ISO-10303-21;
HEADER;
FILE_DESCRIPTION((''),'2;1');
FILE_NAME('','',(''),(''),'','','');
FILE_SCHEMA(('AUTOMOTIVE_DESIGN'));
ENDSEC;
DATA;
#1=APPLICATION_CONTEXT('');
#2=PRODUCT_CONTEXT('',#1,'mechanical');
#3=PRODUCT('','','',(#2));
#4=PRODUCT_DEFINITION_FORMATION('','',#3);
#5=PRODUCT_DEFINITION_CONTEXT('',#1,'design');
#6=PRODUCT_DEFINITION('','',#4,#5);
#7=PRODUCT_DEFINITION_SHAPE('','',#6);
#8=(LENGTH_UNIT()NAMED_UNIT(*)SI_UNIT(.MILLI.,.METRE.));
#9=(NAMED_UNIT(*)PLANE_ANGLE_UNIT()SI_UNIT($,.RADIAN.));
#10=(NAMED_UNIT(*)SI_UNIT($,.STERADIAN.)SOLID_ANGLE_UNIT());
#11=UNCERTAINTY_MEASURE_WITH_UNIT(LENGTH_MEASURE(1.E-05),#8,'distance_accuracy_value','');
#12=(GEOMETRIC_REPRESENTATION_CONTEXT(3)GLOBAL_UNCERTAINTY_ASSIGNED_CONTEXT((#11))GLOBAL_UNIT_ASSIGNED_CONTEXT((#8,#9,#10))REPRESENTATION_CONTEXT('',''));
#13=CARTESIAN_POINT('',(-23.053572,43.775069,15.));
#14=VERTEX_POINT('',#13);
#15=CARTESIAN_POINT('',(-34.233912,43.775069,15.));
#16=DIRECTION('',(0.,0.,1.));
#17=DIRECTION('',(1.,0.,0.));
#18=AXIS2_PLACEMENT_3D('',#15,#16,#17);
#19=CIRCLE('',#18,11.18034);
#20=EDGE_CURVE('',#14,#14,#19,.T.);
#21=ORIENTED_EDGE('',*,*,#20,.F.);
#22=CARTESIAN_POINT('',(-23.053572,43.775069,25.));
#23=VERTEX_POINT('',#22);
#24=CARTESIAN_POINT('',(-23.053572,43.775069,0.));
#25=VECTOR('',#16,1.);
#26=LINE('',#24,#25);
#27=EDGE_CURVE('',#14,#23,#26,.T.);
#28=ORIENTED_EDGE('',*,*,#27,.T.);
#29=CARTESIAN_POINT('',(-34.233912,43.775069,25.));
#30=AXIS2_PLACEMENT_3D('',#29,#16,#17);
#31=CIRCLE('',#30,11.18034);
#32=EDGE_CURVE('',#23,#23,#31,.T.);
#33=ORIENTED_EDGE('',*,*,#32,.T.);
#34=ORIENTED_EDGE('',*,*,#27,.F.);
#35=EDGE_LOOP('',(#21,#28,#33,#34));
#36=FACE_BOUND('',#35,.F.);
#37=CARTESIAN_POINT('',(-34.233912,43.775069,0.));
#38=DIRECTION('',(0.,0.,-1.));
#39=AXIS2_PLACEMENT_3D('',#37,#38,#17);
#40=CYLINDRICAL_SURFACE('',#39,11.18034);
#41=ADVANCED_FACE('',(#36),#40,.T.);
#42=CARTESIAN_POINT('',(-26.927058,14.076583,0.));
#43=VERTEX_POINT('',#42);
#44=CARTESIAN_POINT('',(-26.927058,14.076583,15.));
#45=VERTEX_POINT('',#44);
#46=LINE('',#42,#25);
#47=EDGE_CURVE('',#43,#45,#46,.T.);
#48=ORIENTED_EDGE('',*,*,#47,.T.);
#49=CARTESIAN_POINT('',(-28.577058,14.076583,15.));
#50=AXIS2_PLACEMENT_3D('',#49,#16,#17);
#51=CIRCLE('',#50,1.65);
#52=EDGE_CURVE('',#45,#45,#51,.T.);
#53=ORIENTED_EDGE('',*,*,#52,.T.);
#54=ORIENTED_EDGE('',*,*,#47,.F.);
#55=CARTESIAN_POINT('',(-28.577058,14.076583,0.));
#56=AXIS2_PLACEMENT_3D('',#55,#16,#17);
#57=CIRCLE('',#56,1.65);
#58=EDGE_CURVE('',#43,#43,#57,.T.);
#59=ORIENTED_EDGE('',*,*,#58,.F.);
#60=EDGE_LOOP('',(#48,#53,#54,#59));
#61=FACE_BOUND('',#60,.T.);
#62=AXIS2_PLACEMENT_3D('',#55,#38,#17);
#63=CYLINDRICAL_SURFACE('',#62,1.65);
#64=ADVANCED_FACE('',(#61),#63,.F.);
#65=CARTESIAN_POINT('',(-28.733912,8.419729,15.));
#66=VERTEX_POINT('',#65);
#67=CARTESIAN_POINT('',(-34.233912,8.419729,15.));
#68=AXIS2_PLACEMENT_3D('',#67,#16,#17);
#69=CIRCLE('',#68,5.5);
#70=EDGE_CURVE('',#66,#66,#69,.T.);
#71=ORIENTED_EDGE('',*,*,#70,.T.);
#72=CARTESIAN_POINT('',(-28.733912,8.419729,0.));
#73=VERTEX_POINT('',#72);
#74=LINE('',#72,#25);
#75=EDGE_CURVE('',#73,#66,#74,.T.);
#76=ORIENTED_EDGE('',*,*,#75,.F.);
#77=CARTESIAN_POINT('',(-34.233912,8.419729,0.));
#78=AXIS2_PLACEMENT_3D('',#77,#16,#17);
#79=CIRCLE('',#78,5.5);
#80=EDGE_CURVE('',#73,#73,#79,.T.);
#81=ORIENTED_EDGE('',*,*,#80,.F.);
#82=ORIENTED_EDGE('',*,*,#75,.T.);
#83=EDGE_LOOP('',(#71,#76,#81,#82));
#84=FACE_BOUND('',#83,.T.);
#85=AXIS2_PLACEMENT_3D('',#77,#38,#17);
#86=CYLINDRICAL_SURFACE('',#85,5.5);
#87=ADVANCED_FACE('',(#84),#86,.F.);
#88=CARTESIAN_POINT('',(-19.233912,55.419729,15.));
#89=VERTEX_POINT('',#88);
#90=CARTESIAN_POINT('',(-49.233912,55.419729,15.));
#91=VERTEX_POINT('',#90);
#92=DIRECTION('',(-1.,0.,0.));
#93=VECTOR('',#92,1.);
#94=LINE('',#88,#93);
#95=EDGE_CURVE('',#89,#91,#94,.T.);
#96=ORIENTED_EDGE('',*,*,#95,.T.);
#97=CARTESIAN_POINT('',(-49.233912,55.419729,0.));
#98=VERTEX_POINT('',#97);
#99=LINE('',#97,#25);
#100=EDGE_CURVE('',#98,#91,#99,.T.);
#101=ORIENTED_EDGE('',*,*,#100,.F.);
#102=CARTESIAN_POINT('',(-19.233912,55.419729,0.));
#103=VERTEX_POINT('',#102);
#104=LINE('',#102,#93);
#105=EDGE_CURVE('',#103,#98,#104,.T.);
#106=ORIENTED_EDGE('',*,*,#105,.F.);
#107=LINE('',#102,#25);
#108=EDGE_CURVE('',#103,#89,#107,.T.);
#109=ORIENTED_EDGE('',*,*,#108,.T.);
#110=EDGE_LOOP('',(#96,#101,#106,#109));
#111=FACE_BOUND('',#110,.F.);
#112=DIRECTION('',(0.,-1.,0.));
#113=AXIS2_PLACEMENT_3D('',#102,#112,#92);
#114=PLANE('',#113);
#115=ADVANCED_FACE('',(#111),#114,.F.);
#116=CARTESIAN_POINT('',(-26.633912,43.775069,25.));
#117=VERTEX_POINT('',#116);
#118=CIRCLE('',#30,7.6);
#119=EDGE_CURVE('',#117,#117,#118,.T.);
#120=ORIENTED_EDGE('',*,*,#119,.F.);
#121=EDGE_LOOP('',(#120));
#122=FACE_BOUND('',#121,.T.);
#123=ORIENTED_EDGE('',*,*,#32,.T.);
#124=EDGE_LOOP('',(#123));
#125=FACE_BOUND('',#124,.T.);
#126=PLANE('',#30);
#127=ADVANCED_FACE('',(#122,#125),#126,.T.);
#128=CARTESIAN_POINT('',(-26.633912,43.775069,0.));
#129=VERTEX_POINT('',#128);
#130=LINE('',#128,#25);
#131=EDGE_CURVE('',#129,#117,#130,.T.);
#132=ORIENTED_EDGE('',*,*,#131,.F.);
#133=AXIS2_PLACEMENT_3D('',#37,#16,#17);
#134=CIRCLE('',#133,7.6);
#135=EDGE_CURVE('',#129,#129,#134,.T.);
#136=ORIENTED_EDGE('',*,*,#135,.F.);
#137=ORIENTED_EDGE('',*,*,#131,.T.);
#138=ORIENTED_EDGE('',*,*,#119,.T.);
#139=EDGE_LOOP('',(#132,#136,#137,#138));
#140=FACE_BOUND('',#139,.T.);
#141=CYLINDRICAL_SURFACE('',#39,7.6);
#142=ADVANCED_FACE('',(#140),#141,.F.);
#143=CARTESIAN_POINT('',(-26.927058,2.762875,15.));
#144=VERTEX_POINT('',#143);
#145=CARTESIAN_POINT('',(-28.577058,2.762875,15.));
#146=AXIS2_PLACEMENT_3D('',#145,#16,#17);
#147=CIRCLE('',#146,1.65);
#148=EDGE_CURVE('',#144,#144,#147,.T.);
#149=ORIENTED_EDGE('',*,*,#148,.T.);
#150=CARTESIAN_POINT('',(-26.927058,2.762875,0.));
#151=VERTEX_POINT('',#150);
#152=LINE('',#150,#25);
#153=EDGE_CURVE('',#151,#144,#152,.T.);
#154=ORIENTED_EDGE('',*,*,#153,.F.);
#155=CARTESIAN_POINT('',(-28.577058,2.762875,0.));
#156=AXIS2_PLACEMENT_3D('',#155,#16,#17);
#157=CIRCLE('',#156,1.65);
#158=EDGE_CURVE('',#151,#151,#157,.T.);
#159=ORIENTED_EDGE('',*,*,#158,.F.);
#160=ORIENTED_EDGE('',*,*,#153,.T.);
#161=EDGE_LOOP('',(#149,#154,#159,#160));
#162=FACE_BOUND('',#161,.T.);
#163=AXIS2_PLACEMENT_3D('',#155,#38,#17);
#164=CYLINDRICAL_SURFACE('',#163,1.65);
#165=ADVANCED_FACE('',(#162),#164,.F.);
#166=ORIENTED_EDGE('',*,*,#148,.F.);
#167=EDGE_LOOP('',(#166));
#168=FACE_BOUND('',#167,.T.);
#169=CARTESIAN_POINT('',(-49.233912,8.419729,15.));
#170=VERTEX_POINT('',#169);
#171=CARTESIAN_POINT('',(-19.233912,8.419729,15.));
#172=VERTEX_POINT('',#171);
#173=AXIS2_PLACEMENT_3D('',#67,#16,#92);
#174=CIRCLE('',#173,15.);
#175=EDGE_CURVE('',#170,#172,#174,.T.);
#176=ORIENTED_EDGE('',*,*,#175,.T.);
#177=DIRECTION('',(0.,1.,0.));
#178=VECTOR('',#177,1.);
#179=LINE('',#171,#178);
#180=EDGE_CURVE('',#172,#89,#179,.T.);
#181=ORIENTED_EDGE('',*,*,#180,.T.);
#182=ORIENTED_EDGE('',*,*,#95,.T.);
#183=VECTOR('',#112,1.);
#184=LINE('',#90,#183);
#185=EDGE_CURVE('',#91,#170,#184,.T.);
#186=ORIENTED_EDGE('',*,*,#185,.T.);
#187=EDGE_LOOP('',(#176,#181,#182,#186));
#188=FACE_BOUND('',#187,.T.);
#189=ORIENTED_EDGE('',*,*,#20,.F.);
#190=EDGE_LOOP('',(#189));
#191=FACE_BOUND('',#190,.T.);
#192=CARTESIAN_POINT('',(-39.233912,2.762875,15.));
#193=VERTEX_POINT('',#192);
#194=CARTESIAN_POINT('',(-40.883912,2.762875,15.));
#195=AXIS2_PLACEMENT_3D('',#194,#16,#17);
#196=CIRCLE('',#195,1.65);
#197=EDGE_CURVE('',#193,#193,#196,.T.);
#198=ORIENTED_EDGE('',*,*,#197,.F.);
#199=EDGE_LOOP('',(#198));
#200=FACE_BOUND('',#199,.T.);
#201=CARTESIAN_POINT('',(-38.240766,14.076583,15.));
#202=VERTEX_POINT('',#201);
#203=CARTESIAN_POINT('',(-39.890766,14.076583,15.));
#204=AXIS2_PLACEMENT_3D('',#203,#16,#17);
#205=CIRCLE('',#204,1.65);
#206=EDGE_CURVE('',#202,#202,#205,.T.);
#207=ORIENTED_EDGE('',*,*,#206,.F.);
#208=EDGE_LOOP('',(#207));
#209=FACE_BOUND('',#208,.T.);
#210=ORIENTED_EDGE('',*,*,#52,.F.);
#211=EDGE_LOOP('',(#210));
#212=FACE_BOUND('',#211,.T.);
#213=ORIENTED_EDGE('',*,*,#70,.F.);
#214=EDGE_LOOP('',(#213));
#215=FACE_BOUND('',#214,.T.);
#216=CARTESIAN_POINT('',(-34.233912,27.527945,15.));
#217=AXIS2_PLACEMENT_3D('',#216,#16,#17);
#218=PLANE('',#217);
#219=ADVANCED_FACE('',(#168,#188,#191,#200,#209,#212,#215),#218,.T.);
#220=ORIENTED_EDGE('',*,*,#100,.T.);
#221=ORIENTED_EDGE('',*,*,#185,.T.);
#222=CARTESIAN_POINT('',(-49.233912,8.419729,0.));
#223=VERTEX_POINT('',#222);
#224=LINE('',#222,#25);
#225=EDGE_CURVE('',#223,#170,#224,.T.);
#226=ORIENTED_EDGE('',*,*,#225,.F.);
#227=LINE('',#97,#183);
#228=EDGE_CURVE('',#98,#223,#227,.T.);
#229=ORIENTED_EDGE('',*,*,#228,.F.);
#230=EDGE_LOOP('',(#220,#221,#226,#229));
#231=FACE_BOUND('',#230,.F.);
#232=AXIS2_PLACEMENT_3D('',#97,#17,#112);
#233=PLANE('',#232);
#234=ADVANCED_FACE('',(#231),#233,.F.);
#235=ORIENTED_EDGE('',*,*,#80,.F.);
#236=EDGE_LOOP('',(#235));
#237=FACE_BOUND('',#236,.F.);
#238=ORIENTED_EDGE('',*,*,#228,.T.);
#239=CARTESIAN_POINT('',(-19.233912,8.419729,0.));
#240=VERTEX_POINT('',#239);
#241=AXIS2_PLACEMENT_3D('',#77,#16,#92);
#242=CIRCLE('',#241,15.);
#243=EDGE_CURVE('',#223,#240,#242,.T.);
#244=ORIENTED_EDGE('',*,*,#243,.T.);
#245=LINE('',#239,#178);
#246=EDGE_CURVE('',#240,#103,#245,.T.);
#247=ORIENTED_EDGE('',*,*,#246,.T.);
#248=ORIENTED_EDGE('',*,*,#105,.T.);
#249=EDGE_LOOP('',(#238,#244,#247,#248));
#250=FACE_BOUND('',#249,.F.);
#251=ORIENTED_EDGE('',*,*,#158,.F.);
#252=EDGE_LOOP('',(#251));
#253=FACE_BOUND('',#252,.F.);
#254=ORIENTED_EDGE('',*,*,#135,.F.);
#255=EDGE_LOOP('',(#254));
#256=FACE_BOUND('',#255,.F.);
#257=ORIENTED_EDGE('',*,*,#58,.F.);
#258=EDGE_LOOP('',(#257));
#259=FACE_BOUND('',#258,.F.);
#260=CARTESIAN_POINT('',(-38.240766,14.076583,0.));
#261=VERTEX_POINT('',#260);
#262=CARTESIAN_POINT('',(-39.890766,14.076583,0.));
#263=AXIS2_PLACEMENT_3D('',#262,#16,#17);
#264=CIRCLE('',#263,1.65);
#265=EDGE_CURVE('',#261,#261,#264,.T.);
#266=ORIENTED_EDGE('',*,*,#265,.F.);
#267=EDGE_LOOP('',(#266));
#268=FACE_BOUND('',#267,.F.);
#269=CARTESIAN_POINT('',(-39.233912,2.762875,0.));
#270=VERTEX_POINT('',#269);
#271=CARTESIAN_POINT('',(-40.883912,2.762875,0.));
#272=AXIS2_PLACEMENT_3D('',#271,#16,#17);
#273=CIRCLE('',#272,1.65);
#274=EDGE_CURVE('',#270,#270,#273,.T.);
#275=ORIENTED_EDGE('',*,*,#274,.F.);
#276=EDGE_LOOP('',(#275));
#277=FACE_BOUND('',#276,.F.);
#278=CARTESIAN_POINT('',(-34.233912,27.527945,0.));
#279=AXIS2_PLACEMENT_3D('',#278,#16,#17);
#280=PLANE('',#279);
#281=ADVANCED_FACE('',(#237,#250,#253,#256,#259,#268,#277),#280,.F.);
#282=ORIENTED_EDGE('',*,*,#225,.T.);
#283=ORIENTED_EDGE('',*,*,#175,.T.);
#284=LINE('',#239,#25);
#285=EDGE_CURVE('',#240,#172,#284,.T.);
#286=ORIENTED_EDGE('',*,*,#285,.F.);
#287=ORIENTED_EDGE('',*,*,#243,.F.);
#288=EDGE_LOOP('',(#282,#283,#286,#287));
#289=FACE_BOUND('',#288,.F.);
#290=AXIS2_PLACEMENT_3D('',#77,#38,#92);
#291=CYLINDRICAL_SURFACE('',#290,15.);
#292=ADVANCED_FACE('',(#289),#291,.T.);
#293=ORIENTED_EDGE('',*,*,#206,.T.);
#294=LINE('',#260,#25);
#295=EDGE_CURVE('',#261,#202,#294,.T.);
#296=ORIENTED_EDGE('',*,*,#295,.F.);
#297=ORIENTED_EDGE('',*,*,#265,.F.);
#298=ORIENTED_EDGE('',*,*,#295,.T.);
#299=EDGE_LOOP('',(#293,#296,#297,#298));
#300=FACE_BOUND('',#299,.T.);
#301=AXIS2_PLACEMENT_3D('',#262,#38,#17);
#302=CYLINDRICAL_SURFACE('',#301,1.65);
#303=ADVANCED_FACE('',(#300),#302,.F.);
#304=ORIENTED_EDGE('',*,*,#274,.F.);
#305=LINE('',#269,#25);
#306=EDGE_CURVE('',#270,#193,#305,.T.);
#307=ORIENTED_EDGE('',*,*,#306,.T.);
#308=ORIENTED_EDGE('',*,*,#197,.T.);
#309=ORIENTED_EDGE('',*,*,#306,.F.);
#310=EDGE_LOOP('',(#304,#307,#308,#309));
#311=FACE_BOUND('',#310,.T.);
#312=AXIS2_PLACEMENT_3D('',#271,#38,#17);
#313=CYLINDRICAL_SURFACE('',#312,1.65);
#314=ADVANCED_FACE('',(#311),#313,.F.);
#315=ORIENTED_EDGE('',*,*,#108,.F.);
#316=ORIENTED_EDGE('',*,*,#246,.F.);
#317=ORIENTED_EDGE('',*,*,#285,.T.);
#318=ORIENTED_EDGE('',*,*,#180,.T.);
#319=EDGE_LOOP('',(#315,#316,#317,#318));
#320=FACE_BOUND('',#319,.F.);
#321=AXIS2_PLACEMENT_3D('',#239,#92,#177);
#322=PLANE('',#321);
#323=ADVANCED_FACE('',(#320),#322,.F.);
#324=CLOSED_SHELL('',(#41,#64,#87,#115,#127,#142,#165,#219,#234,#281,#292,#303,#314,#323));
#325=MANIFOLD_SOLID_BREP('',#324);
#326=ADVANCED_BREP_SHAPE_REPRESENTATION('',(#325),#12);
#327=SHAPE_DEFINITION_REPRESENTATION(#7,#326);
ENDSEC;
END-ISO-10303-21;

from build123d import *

# Parameters (mm, degrees)
F0_R     = 1.65
F0_R_2   = 5.5
F0_R_3   = 11.1803398875
F1_DEPTH = 15
F0_R_4   = 7.6
F2_DEPTH = 25


# Not quite as in the source:
# - a feature names something its author has since deleted; it is built from what else it names


with BuildPart() as f1:
    # F0 (on Top) → F1 (new body)
    with BuildSketch(Plane.XY):
        with BuildLine():
            Line((-19.2339122487, 8.4197289313), (-19.2339122487, 53.7750689313))
            Line((-19.2339122487, 53.7750689313), (-19.2339122487, 55.4197289313))
            Line((-19.2339122487, 55.4197289313), (-49.2339122487, 55.4197289313))
            Line((-49.2339122487, 55.4197289313), (-49.2339122487, 8.4197289313))
            ThreePointArc((-49.2339122487, 8.4197289313), (-34.2339122487, -6.5802710687), (-19.2339122487, 8.4197289313))
        make_face()
        with Locations((-40.8839122487, 2.7628746818)):
            Circle(F0_R, mode=Mode.SUBTRACT)
        with Locations((-39.8907664982, 14.0765831808)):
            Circle(F0_R, mode=Mode.SUBTRACT)
        with Locations((-34.2339122487, 8.4197289313)):
            Circle(F0_R_2, mode=Mode.SUBTRACT)
        with Locations((-28.5770579992, 2.7628746818)):
            Circle(F0_R, mode=Mode.SUBTRACT)
        with Locations((-28.5770579992, 14.0765831808)):
            Circle(F0_R, mode=Mode.SUBTRACT)
        with Locations((-34.2339122487, 43.7750689313)):
            Circle(F0_R_3, mode=Mode.SUBTRACT)
    extrude(amount=F1_DEPTH)

    # F0 (on Top) → F2 (join)
    with BuildSketch(Plane.XY):
        with Locations((-34.2339122487, 43.7750689313)):
            Circle(F0_R_3)
        with Locations((-34.2339122487, 43.7750689313)):
            Circle(F0_R_4, mode=Mode.SUBTRACT)
    extrude(amount=F2_DEPTH)


solid = f1.part
